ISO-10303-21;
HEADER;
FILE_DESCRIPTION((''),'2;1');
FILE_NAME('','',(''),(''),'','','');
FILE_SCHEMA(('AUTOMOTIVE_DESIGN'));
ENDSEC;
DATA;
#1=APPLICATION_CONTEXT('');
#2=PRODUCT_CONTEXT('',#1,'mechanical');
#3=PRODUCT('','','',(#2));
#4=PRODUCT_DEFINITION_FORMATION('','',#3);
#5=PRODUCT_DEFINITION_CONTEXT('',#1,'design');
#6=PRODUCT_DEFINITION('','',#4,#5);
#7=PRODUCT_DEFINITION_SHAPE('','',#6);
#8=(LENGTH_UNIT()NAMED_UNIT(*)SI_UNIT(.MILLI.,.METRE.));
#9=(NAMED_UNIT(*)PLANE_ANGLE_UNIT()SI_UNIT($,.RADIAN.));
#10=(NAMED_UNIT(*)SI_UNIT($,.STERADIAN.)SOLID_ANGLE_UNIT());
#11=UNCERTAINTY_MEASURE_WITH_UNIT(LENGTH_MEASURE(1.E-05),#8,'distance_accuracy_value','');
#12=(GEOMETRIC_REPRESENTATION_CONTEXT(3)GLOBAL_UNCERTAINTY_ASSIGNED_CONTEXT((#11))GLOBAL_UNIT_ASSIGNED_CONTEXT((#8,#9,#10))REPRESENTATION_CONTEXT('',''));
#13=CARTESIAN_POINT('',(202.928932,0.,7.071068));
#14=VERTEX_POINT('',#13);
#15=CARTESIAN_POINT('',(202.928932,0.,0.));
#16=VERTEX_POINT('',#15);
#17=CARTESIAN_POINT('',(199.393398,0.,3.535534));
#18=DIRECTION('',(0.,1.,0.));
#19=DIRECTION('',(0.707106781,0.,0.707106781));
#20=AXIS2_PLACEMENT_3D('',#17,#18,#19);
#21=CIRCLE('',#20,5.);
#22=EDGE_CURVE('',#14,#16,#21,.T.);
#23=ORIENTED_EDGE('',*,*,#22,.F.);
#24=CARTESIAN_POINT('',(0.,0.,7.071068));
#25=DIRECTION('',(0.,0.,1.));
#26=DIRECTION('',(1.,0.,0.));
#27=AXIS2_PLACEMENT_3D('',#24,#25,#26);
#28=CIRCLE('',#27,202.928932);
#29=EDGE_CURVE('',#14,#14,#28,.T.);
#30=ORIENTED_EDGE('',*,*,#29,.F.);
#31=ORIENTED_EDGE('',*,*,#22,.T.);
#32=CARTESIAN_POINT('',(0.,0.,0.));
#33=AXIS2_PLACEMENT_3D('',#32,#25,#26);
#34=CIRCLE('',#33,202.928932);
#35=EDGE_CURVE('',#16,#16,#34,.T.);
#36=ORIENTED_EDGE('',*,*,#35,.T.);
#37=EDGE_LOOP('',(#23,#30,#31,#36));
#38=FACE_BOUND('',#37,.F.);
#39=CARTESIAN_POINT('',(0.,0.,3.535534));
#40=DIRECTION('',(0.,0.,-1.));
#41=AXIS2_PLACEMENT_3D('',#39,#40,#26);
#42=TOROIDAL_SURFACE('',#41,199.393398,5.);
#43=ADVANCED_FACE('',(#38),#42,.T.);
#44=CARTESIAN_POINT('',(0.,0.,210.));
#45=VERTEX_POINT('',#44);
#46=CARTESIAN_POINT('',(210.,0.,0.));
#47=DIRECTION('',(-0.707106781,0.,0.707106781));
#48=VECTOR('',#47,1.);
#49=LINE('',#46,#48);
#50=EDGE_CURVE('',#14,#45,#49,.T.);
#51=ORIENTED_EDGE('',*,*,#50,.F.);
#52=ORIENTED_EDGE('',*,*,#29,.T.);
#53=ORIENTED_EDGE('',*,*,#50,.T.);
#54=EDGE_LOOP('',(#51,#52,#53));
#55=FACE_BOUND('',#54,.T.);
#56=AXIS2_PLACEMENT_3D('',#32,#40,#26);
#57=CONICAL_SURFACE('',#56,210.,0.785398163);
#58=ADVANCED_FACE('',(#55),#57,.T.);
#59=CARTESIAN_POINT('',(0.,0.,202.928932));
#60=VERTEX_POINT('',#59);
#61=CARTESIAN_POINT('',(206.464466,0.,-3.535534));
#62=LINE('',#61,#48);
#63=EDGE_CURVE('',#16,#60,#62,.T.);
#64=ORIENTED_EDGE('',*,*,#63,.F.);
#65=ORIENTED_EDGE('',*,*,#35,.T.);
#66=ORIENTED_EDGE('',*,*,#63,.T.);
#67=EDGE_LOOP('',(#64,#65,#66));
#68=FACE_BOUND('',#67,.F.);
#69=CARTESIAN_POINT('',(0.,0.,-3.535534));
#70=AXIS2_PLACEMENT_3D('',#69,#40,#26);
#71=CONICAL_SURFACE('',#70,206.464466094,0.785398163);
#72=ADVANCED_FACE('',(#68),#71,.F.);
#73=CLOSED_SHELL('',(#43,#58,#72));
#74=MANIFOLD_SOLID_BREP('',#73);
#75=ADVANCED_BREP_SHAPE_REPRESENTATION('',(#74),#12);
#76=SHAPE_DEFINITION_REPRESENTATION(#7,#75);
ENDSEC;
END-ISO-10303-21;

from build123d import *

# Parameters (mm, degrees)
F2_T = -5


# Not quite as in the source:
# - a fillet or chamfer that OpenCascade refuses, or shapes differently, is made with other operations: its cross-section is extruded or revolved along the edge and cut away or added
# - a feature of the source that left no trace in its solid (it failed there, or was rolled back) is left out


with BuildPart() as f1:
    # F0 (on Front) → F1 (revolve)
    with BuildSketch(Plane.XZ):
        Polygon((0, 210), (0, 0), (210, 0), align=None)
    revolve(axis=Axis((0, 0, 105), (0, 0, 1)))

    # F2
    f2_openings = [f1.faces().sort_by_distance(p)[0] for p in [
        (0, 0, 0),
    ]]
    offset(amount=F2_T, openings=f2_openings)

    # F3: fillet of radius 5 on 1 edges, made by hand

    # F3_s1 → F3_t2 (revolve, cut)
    with BuildSketch(Plane.XZ):
        with BuildLine():
            ThreePointArc((202.9289321881, 7.0710678119), (204.3933982822, 3.5355339059), (202.9289321881, 0))
            Line((202.9289321881, 0), (210, 0))
            Line((210, 0), (202.9289321881, 7.0710678119))
        make_face()
    revolve(axis=Axis((0, 0, 0), (0, 0, 1)), mode=Mode.SUBTRACT)


solid = f1.part
